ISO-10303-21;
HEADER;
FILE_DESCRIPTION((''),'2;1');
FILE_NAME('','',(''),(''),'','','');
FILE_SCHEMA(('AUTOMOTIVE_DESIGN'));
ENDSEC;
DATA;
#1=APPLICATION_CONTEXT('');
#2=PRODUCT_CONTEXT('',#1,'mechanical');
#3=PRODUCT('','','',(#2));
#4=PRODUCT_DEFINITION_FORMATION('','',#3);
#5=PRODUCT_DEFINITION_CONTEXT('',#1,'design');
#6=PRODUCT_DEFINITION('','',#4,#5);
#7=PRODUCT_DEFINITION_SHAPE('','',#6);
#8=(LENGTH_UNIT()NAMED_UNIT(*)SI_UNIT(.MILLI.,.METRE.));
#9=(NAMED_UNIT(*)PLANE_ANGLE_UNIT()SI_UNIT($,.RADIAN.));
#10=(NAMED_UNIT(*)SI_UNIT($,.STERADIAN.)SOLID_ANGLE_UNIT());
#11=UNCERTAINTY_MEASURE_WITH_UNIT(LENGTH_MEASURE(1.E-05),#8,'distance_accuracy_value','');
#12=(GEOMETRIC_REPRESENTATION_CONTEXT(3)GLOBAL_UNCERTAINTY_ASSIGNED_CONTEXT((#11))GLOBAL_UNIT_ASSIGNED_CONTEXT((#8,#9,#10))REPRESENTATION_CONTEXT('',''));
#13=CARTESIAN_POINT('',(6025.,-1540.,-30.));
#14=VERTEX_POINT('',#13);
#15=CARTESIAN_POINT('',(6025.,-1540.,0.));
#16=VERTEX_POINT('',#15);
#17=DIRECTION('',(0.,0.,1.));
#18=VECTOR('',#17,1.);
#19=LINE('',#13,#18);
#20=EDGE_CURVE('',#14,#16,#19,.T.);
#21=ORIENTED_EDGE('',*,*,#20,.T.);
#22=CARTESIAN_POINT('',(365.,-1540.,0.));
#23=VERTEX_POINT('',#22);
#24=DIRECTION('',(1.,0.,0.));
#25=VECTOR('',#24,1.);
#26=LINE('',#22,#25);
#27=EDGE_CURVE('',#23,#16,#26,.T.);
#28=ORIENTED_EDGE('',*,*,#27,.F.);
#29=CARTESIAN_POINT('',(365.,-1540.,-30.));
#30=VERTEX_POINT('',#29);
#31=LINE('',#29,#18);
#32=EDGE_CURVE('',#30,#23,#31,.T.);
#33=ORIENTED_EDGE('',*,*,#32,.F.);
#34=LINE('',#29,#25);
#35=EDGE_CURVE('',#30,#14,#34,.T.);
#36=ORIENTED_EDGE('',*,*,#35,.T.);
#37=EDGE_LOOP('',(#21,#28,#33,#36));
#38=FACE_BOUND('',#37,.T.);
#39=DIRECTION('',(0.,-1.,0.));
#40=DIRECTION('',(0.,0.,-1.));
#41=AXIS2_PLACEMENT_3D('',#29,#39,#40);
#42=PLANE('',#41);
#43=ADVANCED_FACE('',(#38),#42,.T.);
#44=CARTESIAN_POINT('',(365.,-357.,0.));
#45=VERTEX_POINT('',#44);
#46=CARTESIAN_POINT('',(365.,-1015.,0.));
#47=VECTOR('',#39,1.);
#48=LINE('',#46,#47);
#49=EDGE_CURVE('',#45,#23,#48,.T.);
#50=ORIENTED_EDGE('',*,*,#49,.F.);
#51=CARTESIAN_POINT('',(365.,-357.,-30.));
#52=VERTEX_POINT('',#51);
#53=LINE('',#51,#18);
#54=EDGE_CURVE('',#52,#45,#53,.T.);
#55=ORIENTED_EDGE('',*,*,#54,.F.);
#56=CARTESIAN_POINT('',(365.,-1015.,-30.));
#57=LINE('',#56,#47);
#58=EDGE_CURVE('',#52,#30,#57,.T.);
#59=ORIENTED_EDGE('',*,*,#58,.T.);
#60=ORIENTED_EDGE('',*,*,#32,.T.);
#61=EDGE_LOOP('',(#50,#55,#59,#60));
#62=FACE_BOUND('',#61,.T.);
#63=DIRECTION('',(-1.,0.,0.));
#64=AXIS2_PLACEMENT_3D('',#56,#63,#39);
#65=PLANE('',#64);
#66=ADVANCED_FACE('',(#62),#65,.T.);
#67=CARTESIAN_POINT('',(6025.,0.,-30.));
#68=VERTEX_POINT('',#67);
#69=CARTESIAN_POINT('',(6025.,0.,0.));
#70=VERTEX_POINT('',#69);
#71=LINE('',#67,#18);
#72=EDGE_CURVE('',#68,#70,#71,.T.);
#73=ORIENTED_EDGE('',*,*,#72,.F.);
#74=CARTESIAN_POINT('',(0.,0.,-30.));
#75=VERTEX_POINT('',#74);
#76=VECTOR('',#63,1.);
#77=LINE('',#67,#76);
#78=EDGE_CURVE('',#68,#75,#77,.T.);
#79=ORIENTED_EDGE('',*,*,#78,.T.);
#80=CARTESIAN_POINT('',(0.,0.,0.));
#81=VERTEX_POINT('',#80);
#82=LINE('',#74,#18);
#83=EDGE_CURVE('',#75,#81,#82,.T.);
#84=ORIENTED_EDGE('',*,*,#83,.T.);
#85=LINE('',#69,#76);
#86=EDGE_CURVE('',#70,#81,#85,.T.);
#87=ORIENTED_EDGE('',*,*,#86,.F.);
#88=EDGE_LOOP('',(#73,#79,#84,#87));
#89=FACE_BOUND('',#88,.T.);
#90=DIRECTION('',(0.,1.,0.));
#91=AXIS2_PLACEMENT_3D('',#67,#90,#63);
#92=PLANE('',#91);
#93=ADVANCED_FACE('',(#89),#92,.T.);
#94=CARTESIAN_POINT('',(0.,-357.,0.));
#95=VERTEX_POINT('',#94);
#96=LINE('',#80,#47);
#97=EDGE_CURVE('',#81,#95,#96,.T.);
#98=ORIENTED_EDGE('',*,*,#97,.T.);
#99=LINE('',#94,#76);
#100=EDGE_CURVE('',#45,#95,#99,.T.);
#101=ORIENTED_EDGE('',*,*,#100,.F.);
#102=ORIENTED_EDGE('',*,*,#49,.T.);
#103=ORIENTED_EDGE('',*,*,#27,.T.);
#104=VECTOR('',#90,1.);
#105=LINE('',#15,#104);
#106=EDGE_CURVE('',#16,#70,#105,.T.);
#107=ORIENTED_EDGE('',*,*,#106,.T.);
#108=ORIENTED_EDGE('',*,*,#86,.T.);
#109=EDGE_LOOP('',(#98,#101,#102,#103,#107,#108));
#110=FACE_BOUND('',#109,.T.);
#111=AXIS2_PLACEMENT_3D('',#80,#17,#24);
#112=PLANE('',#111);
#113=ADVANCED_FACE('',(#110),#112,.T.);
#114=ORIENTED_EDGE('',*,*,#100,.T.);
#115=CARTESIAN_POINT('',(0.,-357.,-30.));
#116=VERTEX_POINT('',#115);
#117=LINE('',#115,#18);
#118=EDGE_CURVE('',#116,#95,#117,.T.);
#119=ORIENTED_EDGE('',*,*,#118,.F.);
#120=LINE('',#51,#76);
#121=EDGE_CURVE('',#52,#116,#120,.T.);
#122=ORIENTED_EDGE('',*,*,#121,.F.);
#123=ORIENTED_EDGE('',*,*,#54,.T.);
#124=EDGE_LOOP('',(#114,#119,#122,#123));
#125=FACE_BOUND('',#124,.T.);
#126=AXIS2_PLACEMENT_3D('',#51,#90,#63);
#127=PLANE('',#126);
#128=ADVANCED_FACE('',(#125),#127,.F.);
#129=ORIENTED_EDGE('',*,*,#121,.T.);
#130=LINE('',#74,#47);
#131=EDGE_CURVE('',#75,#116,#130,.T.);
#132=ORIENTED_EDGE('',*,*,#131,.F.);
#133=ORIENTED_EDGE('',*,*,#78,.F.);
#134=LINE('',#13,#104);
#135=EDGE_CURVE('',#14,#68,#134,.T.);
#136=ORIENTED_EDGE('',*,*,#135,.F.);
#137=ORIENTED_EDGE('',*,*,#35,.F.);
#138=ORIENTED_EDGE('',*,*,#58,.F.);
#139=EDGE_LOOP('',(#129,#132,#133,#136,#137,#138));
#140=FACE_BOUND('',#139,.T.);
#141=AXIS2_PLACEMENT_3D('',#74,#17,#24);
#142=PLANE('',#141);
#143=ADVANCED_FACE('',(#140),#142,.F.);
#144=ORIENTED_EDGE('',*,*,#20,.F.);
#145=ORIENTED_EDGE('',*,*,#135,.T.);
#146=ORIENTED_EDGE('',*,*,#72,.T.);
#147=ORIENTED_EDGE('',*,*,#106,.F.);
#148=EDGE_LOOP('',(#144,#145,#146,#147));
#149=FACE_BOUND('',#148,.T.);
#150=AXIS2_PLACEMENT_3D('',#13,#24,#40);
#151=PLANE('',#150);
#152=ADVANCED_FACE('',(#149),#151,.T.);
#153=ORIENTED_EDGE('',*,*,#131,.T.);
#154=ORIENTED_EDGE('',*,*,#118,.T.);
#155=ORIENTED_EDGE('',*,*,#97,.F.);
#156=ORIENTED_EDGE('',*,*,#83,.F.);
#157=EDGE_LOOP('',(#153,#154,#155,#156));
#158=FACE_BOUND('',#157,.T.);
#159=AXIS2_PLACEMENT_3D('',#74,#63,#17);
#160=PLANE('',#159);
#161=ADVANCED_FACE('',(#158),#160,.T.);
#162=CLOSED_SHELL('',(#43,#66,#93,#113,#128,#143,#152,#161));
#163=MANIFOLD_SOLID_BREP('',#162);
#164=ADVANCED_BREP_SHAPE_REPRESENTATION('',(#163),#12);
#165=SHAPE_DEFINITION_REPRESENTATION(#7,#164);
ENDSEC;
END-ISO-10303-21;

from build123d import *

# Parameters (mm, degrees)
TABAN_FLAN_1_DEPTH         = 30
KES_EKSTR_ZYON1_DEPTH      = 6219.771984886
KES_EKSTR_ZYON1_DEPTH_BACK = 6219.771984886
IZIM2_W                    = 365
IZIM2_H                    = 658


# Sheet-metal steps are written as plain solids
with BuildPart() as part:
    # Çizim1 → Taban-Flanş1 (new body)
    with BuildSketch(Plane.XY):
        Polygon((0, 0), (0, -1015), (365, -1015), (365, -1540), (6025, -1540), (6025, 0), align=None)
    extrude(amount=-TABAN_FLAN_1_DEPTH)

    # Çizim2 → Kes-Ekstrüzyon1 (cut, two sides: drawn at the far end of the back side and taken through both)
    with BuildSketch(Plane.XY.offset(-KES_EKSTR_ZYON1_DEPTH_BACK)):
        with Locations((182.5, -686)):
            Rectangle(IZIM2_W, IZIM2_H)
    extrude(amount=KES_EKSTR_ZYON1_DEPTH + KES_EKSTR_ZYON1_DEPTH_BACK, mode=Mode.SUBTRACT)


solid = part.part
